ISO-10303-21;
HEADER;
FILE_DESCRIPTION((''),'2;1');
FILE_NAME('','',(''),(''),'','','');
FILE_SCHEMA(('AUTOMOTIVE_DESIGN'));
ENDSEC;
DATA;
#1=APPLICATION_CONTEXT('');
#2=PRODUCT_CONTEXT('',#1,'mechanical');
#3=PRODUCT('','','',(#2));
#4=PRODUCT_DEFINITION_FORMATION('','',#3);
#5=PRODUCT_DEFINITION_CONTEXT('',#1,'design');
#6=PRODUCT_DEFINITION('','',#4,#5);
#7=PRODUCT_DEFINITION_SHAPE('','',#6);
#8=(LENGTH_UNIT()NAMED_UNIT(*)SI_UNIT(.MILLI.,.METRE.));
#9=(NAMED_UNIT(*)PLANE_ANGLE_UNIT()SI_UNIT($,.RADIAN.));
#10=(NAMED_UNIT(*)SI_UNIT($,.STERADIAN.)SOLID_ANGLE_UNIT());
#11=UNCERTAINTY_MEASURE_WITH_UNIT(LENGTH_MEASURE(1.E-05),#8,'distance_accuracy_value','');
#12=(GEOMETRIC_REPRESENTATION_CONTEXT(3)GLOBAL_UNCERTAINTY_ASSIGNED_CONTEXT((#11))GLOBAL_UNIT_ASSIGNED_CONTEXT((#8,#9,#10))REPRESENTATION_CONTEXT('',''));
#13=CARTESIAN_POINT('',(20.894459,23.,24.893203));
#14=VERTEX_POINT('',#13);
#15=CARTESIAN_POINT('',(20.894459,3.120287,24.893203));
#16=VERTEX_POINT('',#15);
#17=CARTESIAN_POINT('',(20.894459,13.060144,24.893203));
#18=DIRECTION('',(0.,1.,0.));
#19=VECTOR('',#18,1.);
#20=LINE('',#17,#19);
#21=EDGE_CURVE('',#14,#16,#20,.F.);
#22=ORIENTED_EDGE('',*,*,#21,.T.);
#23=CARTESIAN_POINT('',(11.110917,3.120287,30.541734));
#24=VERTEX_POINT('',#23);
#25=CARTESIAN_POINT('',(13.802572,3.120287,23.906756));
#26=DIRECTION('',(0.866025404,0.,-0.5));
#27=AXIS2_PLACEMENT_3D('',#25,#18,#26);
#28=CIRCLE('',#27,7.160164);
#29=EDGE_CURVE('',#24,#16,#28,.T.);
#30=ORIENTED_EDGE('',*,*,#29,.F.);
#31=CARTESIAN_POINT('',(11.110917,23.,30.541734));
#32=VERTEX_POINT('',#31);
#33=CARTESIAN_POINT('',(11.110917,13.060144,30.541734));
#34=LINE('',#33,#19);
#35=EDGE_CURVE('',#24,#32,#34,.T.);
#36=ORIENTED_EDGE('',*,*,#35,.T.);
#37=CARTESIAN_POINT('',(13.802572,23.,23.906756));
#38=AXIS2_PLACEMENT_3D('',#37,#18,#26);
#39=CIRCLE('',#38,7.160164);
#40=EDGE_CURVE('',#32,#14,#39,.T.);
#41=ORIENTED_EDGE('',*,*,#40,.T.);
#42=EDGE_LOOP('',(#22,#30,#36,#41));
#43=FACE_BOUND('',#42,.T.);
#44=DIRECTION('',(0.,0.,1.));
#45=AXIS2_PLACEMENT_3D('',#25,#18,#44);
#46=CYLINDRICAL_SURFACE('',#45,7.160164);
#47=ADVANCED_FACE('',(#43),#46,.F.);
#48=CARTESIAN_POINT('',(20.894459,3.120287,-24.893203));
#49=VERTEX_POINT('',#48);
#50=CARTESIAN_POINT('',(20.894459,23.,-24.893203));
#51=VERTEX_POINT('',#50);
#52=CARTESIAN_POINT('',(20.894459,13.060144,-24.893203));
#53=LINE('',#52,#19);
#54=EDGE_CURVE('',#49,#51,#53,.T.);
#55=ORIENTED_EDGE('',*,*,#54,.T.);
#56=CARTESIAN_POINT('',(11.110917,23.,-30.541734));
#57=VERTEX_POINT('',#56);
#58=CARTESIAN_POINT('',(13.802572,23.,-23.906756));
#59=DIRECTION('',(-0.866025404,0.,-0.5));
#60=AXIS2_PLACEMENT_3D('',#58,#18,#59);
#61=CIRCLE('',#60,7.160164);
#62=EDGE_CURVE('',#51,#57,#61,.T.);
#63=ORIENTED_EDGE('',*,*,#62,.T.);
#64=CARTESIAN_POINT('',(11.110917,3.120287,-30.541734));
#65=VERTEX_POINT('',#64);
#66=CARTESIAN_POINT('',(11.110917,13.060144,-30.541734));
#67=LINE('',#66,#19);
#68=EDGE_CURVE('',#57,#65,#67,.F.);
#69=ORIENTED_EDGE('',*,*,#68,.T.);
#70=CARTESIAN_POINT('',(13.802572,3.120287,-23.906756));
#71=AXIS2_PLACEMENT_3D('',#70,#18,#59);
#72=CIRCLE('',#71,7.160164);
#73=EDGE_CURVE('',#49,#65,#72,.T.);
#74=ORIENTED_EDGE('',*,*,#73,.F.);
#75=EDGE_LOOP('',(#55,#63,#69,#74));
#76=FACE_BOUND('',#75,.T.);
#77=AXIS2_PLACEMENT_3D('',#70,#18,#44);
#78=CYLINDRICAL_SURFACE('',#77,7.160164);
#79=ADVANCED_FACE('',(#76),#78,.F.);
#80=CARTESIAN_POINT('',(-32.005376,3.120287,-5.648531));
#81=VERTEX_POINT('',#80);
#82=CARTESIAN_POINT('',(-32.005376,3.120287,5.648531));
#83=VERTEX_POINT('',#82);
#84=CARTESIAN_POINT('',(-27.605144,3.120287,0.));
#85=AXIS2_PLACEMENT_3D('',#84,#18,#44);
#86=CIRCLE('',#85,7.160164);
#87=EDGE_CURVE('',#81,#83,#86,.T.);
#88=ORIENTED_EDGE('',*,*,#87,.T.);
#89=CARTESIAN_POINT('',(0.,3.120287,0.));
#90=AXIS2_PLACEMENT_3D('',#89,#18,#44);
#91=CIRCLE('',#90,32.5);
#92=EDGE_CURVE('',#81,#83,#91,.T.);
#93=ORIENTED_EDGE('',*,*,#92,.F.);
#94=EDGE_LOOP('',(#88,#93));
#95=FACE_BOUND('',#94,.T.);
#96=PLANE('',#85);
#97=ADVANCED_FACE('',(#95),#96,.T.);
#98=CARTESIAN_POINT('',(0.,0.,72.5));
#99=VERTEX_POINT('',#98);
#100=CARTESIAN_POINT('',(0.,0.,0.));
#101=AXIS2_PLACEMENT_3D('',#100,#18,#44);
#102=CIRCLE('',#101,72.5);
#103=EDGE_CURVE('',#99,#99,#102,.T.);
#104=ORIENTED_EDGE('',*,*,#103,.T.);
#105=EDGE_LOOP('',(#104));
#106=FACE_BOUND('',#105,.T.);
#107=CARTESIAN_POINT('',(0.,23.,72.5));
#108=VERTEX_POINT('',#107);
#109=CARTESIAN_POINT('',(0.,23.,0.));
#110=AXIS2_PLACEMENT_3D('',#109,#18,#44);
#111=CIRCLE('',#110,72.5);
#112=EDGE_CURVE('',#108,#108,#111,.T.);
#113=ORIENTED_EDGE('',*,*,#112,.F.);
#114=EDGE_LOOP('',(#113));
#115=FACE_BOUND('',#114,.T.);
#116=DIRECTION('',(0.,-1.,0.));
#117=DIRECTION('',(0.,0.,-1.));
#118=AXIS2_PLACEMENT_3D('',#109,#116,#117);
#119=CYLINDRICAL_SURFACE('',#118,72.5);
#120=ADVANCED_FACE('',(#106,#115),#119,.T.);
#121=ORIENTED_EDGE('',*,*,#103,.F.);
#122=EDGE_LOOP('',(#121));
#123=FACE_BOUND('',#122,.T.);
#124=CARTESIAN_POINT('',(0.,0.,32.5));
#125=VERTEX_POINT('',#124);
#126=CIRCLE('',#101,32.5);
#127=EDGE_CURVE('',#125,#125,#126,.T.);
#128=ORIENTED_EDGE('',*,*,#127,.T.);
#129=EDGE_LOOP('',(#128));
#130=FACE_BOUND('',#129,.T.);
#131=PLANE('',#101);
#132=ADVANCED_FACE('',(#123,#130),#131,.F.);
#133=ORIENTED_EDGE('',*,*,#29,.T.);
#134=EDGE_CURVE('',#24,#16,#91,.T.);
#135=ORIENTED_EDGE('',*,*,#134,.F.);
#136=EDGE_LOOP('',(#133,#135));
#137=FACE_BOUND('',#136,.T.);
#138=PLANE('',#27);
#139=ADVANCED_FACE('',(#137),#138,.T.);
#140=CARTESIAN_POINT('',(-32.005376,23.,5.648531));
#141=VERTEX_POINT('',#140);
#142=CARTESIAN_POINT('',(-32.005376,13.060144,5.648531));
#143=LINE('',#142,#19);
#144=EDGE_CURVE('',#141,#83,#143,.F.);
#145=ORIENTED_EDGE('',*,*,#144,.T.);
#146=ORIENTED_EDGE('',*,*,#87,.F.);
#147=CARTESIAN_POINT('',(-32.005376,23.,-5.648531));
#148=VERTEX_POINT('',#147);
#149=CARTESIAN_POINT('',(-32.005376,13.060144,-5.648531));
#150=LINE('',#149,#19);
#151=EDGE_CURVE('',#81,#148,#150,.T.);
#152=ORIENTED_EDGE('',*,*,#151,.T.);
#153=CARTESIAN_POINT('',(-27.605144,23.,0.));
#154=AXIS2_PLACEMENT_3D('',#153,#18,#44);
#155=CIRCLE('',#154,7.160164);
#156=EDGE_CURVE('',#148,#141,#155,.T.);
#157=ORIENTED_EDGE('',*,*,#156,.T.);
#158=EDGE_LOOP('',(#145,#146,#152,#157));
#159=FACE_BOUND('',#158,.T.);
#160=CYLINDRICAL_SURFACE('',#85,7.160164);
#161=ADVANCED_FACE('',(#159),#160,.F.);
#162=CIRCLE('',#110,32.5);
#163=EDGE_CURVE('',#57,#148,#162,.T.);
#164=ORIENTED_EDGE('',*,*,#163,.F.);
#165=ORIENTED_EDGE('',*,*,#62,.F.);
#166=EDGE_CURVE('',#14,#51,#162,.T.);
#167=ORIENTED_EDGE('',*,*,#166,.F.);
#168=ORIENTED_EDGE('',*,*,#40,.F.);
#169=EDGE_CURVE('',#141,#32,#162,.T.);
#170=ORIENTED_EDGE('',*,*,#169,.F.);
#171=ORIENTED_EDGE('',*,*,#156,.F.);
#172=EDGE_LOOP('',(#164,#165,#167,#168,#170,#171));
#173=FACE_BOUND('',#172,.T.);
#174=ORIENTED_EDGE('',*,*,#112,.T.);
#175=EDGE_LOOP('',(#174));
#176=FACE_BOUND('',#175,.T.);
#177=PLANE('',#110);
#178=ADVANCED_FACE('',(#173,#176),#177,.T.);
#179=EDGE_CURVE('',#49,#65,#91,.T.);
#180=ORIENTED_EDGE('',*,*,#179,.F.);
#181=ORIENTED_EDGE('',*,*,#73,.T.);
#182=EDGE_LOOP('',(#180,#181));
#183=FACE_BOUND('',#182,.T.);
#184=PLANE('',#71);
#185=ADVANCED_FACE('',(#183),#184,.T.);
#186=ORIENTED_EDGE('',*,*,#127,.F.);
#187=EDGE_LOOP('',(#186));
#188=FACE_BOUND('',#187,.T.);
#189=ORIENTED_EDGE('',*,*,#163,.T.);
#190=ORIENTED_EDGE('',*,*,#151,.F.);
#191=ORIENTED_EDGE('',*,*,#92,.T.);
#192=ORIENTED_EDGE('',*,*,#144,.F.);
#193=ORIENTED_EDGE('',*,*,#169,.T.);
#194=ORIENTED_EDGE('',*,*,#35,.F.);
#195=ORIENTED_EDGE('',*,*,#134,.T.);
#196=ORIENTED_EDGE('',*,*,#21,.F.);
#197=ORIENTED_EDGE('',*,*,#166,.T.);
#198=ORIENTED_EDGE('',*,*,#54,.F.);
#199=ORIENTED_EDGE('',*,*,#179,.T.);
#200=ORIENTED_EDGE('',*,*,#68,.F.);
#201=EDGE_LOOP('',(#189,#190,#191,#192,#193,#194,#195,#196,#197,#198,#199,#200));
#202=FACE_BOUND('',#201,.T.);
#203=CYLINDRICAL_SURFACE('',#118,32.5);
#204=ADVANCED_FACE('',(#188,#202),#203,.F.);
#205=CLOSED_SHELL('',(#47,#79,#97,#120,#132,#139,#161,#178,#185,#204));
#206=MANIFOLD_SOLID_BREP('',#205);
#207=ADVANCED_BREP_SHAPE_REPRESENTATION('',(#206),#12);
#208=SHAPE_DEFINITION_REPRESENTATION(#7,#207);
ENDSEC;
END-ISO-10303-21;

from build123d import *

# Parameters (mm, degrees)
SKETCH1_R           = 72.5
BOSS_EXTRUDE1_DEPTH = 23
SKETCH2_R           = 32.5
CUT_EXTRUDE1_DEPTH  = 106.078542053
SKETCH3_R           = 7.160163636
CUT_EXTRUDE2_DEPTH  = 19.879712935
CIRPATTERN1_COUNT   = 3


with BuildPart() as part:
    # Sketch1 → Boss-Extrude1 (new body)
    with BuildSketch(Plane(origin=(0, 0, 0), x_dir=(1, 0, 0), z_dir=(0, 1, 0))):
        Circle(SKETCH1_R)
    extrude(amount=BOSS_EXTRUDE1_DEPTH)

    # Sketch2 → Cut-Extrude1 (cut, through all)
    with BuildSketch(Plane(origin=(0, 0, 0), x_dir=(1, 0, 0), z_dir=(0, 1, 0))):
        Circle(SKETCH2_R)
    extrude(amount=CUT_EXTRUDE1_DEPTH, mode=Mode.SUBTRACT)

    # Sketch3 → Cut-Extrude2 (cut)
    with BuildSketch(Plane(origin=(0, 23, 0), x_dir=(1, 0, 0), z_dir=(0, 1, 0))):
        with Locations((-27.605143873, 0)):
            Circle(SKETCH3_R)
    cut_extrude2 = extrude(amount=-CUT_EXTRUDE2_DEPTH, mode=Mode.SUBTRACT)

    # CirPattern1: Cut-Extrude2 ×3 about axis
    cirpattern1_axis = Axis((0, 0, 0), (0, 1, 0))
    for i in range(1, CIRPATTERN1_COUNT):
        add(cut_extrude2.rotate(cirpattern1_axis, i * 360 / CIRPATTERN1_COUNT), mode=Mode.SUBTRACT)


solid = part.part
